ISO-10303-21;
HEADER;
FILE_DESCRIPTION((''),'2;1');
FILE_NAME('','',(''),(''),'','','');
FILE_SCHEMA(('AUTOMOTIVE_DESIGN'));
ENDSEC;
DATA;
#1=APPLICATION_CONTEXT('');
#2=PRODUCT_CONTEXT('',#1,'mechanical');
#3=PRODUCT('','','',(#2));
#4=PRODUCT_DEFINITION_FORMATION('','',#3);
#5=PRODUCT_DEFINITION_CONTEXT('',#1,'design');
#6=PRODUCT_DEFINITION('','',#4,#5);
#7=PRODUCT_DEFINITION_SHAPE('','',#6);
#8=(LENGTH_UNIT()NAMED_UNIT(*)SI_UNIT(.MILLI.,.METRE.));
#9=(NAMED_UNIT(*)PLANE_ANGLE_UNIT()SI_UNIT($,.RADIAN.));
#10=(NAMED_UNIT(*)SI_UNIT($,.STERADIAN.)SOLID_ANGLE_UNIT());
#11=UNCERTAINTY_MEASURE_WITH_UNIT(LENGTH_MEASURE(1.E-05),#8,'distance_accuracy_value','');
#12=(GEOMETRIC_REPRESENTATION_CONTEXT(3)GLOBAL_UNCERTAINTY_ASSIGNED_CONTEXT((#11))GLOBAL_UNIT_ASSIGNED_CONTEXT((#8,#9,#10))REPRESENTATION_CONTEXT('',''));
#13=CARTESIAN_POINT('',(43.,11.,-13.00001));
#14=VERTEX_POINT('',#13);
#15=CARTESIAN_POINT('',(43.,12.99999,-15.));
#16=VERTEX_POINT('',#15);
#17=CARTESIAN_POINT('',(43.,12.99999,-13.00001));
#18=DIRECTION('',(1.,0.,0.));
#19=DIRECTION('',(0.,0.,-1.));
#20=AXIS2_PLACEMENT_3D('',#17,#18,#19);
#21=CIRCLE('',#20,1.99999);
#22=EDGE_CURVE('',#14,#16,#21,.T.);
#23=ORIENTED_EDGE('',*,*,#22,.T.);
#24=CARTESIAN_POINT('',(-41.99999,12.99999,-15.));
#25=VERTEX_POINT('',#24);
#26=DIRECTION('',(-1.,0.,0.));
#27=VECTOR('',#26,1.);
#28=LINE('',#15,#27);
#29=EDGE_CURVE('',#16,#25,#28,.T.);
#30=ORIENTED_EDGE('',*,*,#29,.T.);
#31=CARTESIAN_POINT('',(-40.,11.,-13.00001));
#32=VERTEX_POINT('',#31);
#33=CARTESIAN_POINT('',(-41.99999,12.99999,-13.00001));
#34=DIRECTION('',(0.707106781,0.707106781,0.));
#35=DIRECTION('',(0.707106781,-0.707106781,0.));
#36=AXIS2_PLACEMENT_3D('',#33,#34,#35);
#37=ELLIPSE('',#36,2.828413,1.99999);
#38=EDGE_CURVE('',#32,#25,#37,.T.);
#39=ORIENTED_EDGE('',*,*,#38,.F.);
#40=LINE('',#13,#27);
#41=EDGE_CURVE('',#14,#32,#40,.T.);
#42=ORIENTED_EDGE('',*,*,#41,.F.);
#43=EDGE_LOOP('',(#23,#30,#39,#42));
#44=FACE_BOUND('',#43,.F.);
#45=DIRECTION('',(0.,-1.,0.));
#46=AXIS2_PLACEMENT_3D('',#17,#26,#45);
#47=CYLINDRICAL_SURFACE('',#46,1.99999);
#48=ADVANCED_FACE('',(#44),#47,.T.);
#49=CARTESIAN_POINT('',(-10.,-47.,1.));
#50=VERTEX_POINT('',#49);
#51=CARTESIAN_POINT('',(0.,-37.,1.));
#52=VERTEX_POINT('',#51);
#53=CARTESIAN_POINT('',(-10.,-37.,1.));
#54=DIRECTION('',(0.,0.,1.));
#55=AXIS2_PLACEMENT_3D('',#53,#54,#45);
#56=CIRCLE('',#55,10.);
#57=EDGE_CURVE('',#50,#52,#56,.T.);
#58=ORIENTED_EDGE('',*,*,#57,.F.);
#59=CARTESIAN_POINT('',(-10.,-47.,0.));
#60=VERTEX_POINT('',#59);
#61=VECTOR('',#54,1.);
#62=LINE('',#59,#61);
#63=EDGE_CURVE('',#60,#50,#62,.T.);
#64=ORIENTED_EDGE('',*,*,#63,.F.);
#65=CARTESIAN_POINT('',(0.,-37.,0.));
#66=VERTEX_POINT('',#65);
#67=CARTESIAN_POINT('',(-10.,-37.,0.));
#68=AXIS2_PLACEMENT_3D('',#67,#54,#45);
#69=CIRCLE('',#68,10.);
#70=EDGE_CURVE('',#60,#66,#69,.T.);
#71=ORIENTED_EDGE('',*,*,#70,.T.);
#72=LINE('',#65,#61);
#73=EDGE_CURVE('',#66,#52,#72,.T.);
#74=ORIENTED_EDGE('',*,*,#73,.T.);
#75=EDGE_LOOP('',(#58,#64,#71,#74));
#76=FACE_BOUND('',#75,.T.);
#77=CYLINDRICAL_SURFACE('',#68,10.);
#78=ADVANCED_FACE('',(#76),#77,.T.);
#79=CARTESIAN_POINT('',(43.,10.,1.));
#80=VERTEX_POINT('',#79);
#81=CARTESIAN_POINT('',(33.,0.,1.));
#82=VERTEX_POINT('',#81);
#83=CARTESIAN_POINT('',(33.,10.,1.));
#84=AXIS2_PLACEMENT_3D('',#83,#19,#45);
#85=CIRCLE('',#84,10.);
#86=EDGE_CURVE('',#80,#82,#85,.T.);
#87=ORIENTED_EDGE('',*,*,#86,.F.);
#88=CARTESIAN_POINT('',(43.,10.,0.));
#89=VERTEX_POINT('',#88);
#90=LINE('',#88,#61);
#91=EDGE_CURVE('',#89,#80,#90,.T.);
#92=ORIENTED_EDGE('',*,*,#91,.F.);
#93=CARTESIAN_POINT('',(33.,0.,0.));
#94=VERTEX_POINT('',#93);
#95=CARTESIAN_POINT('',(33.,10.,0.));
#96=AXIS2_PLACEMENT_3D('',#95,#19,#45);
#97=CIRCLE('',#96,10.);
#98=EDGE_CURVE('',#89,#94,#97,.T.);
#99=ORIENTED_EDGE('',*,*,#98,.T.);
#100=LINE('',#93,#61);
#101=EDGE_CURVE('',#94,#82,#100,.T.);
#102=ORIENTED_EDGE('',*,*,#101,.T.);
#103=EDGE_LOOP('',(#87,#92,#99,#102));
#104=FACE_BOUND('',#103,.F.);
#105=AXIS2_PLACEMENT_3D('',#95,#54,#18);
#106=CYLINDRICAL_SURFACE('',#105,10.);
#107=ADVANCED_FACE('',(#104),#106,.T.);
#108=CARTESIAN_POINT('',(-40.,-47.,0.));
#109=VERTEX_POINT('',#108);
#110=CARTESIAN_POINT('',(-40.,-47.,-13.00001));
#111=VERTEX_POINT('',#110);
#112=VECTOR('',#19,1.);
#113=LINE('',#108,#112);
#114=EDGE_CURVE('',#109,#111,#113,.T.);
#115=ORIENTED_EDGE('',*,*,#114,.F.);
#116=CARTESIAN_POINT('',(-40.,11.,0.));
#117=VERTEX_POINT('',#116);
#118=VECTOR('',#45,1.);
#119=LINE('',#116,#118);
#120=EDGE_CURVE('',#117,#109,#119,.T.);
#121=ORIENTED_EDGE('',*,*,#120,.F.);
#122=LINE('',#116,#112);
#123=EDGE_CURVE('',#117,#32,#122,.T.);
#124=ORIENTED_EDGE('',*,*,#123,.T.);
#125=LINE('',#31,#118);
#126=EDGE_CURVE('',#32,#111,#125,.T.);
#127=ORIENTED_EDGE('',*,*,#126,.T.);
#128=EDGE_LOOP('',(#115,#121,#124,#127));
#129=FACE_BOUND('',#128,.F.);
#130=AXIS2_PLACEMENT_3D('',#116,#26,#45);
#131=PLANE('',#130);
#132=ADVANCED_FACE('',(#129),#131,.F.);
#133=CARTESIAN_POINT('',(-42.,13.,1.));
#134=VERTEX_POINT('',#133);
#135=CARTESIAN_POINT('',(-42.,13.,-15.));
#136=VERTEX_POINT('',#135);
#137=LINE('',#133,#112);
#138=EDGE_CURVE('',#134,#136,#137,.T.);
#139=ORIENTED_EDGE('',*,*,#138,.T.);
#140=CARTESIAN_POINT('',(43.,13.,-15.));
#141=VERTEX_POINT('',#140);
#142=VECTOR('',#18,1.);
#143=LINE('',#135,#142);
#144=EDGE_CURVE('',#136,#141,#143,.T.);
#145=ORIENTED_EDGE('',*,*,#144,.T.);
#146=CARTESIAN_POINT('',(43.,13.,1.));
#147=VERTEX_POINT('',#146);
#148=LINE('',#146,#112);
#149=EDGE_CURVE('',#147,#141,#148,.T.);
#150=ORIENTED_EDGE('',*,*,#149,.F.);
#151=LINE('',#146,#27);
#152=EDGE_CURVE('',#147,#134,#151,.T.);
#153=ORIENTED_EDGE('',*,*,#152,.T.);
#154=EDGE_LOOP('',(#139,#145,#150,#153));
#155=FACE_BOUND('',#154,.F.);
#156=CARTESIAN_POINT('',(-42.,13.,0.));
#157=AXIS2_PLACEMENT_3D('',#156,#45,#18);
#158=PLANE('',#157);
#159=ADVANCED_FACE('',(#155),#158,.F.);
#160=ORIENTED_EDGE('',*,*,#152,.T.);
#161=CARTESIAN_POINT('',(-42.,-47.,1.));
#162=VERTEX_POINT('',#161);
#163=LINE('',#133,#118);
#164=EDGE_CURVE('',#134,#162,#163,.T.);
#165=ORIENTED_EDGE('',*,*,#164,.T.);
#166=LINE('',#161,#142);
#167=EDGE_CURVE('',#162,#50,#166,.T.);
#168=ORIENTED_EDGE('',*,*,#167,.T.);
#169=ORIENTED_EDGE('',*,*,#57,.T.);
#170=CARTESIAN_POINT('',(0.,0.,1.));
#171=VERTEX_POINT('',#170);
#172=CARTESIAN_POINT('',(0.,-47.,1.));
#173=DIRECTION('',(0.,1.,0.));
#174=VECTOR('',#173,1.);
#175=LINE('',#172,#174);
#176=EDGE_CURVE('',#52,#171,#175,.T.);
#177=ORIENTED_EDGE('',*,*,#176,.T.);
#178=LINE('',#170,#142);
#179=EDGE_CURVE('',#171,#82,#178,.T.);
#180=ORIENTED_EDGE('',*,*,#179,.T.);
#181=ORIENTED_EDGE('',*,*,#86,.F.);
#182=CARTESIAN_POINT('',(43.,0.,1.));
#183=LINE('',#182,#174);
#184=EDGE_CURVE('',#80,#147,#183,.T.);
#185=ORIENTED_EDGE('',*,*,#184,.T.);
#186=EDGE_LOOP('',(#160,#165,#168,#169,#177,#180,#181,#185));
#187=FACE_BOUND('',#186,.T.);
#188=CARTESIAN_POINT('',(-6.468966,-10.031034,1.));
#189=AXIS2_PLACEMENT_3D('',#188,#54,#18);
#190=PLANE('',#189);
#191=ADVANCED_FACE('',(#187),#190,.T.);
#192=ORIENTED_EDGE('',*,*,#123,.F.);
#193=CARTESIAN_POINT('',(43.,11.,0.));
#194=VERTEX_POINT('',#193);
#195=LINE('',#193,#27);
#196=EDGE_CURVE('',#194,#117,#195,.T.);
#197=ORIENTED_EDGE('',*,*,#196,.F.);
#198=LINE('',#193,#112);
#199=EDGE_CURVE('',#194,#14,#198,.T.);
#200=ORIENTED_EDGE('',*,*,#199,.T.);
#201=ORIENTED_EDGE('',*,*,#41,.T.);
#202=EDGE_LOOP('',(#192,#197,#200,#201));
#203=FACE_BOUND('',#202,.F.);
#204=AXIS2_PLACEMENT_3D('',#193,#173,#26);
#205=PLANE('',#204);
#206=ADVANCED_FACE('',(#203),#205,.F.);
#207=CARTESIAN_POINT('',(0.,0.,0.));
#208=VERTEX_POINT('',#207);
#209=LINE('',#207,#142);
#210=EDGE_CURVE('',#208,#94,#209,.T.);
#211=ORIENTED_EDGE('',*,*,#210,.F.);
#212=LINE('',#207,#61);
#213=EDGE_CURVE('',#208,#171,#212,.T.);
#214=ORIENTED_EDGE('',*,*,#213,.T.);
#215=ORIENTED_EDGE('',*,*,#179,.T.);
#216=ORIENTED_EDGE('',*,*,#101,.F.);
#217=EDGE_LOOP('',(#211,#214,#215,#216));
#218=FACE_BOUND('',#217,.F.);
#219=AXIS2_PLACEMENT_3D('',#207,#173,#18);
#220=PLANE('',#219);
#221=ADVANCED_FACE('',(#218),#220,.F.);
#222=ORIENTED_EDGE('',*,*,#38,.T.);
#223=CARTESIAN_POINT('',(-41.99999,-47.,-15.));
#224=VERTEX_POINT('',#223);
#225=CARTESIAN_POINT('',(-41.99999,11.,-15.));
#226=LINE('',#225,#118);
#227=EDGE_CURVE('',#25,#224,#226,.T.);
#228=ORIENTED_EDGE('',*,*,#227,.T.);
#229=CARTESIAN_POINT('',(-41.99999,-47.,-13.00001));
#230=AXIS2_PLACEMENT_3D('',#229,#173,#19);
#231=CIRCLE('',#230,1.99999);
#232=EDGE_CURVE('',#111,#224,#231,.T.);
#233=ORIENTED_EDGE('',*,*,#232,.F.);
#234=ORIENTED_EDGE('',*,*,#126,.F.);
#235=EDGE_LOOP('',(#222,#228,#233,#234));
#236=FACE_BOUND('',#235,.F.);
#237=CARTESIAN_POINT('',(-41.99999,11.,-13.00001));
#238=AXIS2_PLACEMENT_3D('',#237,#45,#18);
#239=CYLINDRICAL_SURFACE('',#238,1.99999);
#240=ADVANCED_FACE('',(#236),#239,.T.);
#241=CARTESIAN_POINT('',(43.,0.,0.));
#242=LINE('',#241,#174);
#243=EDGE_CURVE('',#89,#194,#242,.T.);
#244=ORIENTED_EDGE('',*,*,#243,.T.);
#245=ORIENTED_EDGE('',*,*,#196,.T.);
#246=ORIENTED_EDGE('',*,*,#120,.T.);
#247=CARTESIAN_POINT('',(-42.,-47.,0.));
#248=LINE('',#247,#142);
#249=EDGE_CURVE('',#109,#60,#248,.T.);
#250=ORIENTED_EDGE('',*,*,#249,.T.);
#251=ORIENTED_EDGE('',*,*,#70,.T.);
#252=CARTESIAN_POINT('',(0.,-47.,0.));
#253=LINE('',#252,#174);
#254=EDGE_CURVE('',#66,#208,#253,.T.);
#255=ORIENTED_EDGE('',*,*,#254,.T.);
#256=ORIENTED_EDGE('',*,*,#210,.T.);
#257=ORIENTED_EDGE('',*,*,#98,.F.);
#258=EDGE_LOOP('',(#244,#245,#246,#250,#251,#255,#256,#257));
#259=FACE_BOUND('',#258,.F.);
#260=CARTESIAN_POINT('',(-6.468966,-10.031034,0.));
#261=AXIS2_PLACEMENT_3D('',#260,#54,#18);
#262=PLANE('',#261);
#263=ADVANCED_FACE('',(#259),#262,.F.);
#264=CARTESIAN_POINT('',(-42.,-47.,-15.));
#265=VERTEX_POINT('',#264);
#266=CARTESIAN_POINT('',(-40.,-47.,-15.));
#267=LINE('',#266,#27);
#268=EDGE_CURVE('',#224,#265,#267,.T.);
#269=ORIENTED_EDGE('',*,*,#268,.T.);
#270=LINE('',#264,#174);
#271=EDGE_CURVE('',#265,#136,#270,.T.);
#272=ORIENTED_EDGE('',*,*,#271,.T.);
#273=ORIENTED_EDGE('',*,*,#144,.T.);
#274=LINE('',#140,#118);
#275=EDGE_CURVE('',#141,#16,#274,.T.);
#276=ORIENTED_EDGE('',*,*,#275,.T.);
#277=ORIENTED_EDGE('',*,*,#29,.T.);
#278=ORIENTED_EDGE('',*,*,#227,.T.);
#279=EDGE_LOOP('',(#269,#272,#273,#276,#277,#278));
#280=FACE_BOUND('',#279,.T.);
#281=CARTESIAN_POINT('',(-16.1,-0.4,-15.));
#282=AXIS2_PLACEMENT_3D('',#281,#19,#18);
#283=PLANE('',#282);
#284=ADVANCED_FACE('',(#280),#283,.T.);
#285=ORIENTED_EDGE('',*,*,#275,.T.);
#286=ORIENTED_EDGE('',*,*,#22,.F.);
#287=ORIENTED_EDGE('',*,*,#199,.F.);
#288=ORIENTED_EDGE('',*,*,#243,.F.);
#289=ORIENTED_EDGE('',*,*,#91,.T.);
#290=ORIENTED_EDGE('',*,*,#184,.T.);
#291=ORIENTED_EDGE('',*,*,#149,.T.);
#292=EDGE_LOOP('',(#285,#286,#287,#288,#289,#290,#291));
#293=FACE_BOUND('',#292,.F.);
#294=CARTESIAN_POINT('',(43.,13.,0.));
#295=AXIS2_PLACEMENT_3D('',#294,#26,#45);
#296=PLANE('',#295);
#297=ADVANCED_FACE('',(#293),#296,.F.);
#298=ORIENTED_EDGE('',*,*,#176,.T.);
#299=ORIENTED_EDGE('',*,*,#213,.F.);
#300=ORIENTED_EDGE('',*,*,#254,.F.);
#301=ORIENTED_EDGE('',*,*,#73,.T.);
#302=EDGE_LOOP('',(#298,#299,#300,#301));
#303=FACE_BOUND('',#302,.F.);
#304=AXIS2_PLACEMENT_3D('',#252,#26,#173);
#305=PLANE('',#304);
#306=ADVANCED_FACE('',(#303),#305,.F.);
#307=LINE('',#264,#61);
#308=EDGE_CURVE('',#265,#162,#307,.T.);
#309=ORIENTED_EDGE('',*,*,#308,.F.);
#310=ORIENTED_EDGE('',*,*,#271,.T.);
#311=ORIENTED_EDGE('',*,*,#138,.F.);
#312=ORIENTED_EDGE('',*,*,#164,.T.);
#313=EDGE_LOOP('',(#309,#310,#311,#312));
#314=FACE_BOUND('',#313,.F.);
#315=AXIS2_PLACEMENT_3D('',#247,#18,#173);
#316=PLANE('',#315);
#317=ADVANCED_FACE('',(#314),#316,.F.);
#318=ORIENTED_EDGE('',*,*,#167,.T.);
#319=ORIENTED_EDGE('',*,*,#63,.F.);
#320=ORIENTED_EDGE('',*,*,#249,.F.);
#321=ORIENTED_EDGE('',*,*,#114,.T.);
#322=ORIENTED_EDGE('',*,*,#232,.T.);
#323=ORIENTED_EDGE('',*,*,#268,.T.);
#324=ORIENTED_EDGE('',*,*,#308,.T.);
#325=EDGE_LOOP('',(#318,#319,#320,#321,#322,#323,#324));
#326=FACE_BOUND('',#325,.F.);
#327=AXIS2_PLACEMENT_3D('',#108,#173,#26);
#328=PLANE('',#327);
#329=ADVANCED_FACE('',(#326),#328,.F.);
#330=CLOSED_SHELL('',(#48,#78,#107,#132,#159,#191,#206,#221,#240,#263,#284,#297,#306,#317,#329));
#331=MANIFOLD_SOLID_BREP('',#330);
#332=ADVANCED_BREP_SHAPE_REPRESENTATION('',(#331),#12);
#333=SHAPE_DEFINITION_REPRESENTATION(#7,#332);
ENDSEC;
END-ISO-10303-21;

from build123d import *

# Parameters (mm, degrees)
F1_DEPTH = 1
F3_DEPTH = 15
F4_R     = 1.99999
F5_R     = 10


# Not quite as in the source:
# - a fillet or chamfer is up to 0.001 mm smaller than in the source, because OpenCascade refuses the exact size


with BuildPart() as f1:
    # F0 (on Top) → F1 (new body)
    with BuildSketch(Plane.XY):
        Polygon((-42, -47), (0, -47), (0, 0), (43, 0), (43, 13), (-42, 13), (-42, 0), align=None)
    extrude(amount=F1_DEPTH)

    # F2 (on face) → F3 (join)
    with BuildSketch(Plane(origin=(0, 0, 0), x_dir=(1, 0, 0), z_dir=(0, 0, -1))):
        Polygon((-42, 47), (-42, -13), (-40, -13), (43, -13), (43, -11), (-40, -11), (-40, 47), align=None)
    extrude(amount=F3_DEPTH)

    # F4 (radius 2 in the source; OpenCascade refuses exactly that, so slightly less here)
    f4_edges = [f1.edges().sort_by_distance(p)[0] for p in [
        (-40, -18, -15),
        (1.5, 11, -15),
    ]]
    fillet(f4_edges, radius=F4_R)

    # F5
    f5_edges = [f1.edges().sort_by_distance(p)[0] for p in [
        (0, -47, 0.5),
        (43, 0, 0.5),
    ]]
    fillet(f5_edges, radius=F5_R)


solid = f1.part
